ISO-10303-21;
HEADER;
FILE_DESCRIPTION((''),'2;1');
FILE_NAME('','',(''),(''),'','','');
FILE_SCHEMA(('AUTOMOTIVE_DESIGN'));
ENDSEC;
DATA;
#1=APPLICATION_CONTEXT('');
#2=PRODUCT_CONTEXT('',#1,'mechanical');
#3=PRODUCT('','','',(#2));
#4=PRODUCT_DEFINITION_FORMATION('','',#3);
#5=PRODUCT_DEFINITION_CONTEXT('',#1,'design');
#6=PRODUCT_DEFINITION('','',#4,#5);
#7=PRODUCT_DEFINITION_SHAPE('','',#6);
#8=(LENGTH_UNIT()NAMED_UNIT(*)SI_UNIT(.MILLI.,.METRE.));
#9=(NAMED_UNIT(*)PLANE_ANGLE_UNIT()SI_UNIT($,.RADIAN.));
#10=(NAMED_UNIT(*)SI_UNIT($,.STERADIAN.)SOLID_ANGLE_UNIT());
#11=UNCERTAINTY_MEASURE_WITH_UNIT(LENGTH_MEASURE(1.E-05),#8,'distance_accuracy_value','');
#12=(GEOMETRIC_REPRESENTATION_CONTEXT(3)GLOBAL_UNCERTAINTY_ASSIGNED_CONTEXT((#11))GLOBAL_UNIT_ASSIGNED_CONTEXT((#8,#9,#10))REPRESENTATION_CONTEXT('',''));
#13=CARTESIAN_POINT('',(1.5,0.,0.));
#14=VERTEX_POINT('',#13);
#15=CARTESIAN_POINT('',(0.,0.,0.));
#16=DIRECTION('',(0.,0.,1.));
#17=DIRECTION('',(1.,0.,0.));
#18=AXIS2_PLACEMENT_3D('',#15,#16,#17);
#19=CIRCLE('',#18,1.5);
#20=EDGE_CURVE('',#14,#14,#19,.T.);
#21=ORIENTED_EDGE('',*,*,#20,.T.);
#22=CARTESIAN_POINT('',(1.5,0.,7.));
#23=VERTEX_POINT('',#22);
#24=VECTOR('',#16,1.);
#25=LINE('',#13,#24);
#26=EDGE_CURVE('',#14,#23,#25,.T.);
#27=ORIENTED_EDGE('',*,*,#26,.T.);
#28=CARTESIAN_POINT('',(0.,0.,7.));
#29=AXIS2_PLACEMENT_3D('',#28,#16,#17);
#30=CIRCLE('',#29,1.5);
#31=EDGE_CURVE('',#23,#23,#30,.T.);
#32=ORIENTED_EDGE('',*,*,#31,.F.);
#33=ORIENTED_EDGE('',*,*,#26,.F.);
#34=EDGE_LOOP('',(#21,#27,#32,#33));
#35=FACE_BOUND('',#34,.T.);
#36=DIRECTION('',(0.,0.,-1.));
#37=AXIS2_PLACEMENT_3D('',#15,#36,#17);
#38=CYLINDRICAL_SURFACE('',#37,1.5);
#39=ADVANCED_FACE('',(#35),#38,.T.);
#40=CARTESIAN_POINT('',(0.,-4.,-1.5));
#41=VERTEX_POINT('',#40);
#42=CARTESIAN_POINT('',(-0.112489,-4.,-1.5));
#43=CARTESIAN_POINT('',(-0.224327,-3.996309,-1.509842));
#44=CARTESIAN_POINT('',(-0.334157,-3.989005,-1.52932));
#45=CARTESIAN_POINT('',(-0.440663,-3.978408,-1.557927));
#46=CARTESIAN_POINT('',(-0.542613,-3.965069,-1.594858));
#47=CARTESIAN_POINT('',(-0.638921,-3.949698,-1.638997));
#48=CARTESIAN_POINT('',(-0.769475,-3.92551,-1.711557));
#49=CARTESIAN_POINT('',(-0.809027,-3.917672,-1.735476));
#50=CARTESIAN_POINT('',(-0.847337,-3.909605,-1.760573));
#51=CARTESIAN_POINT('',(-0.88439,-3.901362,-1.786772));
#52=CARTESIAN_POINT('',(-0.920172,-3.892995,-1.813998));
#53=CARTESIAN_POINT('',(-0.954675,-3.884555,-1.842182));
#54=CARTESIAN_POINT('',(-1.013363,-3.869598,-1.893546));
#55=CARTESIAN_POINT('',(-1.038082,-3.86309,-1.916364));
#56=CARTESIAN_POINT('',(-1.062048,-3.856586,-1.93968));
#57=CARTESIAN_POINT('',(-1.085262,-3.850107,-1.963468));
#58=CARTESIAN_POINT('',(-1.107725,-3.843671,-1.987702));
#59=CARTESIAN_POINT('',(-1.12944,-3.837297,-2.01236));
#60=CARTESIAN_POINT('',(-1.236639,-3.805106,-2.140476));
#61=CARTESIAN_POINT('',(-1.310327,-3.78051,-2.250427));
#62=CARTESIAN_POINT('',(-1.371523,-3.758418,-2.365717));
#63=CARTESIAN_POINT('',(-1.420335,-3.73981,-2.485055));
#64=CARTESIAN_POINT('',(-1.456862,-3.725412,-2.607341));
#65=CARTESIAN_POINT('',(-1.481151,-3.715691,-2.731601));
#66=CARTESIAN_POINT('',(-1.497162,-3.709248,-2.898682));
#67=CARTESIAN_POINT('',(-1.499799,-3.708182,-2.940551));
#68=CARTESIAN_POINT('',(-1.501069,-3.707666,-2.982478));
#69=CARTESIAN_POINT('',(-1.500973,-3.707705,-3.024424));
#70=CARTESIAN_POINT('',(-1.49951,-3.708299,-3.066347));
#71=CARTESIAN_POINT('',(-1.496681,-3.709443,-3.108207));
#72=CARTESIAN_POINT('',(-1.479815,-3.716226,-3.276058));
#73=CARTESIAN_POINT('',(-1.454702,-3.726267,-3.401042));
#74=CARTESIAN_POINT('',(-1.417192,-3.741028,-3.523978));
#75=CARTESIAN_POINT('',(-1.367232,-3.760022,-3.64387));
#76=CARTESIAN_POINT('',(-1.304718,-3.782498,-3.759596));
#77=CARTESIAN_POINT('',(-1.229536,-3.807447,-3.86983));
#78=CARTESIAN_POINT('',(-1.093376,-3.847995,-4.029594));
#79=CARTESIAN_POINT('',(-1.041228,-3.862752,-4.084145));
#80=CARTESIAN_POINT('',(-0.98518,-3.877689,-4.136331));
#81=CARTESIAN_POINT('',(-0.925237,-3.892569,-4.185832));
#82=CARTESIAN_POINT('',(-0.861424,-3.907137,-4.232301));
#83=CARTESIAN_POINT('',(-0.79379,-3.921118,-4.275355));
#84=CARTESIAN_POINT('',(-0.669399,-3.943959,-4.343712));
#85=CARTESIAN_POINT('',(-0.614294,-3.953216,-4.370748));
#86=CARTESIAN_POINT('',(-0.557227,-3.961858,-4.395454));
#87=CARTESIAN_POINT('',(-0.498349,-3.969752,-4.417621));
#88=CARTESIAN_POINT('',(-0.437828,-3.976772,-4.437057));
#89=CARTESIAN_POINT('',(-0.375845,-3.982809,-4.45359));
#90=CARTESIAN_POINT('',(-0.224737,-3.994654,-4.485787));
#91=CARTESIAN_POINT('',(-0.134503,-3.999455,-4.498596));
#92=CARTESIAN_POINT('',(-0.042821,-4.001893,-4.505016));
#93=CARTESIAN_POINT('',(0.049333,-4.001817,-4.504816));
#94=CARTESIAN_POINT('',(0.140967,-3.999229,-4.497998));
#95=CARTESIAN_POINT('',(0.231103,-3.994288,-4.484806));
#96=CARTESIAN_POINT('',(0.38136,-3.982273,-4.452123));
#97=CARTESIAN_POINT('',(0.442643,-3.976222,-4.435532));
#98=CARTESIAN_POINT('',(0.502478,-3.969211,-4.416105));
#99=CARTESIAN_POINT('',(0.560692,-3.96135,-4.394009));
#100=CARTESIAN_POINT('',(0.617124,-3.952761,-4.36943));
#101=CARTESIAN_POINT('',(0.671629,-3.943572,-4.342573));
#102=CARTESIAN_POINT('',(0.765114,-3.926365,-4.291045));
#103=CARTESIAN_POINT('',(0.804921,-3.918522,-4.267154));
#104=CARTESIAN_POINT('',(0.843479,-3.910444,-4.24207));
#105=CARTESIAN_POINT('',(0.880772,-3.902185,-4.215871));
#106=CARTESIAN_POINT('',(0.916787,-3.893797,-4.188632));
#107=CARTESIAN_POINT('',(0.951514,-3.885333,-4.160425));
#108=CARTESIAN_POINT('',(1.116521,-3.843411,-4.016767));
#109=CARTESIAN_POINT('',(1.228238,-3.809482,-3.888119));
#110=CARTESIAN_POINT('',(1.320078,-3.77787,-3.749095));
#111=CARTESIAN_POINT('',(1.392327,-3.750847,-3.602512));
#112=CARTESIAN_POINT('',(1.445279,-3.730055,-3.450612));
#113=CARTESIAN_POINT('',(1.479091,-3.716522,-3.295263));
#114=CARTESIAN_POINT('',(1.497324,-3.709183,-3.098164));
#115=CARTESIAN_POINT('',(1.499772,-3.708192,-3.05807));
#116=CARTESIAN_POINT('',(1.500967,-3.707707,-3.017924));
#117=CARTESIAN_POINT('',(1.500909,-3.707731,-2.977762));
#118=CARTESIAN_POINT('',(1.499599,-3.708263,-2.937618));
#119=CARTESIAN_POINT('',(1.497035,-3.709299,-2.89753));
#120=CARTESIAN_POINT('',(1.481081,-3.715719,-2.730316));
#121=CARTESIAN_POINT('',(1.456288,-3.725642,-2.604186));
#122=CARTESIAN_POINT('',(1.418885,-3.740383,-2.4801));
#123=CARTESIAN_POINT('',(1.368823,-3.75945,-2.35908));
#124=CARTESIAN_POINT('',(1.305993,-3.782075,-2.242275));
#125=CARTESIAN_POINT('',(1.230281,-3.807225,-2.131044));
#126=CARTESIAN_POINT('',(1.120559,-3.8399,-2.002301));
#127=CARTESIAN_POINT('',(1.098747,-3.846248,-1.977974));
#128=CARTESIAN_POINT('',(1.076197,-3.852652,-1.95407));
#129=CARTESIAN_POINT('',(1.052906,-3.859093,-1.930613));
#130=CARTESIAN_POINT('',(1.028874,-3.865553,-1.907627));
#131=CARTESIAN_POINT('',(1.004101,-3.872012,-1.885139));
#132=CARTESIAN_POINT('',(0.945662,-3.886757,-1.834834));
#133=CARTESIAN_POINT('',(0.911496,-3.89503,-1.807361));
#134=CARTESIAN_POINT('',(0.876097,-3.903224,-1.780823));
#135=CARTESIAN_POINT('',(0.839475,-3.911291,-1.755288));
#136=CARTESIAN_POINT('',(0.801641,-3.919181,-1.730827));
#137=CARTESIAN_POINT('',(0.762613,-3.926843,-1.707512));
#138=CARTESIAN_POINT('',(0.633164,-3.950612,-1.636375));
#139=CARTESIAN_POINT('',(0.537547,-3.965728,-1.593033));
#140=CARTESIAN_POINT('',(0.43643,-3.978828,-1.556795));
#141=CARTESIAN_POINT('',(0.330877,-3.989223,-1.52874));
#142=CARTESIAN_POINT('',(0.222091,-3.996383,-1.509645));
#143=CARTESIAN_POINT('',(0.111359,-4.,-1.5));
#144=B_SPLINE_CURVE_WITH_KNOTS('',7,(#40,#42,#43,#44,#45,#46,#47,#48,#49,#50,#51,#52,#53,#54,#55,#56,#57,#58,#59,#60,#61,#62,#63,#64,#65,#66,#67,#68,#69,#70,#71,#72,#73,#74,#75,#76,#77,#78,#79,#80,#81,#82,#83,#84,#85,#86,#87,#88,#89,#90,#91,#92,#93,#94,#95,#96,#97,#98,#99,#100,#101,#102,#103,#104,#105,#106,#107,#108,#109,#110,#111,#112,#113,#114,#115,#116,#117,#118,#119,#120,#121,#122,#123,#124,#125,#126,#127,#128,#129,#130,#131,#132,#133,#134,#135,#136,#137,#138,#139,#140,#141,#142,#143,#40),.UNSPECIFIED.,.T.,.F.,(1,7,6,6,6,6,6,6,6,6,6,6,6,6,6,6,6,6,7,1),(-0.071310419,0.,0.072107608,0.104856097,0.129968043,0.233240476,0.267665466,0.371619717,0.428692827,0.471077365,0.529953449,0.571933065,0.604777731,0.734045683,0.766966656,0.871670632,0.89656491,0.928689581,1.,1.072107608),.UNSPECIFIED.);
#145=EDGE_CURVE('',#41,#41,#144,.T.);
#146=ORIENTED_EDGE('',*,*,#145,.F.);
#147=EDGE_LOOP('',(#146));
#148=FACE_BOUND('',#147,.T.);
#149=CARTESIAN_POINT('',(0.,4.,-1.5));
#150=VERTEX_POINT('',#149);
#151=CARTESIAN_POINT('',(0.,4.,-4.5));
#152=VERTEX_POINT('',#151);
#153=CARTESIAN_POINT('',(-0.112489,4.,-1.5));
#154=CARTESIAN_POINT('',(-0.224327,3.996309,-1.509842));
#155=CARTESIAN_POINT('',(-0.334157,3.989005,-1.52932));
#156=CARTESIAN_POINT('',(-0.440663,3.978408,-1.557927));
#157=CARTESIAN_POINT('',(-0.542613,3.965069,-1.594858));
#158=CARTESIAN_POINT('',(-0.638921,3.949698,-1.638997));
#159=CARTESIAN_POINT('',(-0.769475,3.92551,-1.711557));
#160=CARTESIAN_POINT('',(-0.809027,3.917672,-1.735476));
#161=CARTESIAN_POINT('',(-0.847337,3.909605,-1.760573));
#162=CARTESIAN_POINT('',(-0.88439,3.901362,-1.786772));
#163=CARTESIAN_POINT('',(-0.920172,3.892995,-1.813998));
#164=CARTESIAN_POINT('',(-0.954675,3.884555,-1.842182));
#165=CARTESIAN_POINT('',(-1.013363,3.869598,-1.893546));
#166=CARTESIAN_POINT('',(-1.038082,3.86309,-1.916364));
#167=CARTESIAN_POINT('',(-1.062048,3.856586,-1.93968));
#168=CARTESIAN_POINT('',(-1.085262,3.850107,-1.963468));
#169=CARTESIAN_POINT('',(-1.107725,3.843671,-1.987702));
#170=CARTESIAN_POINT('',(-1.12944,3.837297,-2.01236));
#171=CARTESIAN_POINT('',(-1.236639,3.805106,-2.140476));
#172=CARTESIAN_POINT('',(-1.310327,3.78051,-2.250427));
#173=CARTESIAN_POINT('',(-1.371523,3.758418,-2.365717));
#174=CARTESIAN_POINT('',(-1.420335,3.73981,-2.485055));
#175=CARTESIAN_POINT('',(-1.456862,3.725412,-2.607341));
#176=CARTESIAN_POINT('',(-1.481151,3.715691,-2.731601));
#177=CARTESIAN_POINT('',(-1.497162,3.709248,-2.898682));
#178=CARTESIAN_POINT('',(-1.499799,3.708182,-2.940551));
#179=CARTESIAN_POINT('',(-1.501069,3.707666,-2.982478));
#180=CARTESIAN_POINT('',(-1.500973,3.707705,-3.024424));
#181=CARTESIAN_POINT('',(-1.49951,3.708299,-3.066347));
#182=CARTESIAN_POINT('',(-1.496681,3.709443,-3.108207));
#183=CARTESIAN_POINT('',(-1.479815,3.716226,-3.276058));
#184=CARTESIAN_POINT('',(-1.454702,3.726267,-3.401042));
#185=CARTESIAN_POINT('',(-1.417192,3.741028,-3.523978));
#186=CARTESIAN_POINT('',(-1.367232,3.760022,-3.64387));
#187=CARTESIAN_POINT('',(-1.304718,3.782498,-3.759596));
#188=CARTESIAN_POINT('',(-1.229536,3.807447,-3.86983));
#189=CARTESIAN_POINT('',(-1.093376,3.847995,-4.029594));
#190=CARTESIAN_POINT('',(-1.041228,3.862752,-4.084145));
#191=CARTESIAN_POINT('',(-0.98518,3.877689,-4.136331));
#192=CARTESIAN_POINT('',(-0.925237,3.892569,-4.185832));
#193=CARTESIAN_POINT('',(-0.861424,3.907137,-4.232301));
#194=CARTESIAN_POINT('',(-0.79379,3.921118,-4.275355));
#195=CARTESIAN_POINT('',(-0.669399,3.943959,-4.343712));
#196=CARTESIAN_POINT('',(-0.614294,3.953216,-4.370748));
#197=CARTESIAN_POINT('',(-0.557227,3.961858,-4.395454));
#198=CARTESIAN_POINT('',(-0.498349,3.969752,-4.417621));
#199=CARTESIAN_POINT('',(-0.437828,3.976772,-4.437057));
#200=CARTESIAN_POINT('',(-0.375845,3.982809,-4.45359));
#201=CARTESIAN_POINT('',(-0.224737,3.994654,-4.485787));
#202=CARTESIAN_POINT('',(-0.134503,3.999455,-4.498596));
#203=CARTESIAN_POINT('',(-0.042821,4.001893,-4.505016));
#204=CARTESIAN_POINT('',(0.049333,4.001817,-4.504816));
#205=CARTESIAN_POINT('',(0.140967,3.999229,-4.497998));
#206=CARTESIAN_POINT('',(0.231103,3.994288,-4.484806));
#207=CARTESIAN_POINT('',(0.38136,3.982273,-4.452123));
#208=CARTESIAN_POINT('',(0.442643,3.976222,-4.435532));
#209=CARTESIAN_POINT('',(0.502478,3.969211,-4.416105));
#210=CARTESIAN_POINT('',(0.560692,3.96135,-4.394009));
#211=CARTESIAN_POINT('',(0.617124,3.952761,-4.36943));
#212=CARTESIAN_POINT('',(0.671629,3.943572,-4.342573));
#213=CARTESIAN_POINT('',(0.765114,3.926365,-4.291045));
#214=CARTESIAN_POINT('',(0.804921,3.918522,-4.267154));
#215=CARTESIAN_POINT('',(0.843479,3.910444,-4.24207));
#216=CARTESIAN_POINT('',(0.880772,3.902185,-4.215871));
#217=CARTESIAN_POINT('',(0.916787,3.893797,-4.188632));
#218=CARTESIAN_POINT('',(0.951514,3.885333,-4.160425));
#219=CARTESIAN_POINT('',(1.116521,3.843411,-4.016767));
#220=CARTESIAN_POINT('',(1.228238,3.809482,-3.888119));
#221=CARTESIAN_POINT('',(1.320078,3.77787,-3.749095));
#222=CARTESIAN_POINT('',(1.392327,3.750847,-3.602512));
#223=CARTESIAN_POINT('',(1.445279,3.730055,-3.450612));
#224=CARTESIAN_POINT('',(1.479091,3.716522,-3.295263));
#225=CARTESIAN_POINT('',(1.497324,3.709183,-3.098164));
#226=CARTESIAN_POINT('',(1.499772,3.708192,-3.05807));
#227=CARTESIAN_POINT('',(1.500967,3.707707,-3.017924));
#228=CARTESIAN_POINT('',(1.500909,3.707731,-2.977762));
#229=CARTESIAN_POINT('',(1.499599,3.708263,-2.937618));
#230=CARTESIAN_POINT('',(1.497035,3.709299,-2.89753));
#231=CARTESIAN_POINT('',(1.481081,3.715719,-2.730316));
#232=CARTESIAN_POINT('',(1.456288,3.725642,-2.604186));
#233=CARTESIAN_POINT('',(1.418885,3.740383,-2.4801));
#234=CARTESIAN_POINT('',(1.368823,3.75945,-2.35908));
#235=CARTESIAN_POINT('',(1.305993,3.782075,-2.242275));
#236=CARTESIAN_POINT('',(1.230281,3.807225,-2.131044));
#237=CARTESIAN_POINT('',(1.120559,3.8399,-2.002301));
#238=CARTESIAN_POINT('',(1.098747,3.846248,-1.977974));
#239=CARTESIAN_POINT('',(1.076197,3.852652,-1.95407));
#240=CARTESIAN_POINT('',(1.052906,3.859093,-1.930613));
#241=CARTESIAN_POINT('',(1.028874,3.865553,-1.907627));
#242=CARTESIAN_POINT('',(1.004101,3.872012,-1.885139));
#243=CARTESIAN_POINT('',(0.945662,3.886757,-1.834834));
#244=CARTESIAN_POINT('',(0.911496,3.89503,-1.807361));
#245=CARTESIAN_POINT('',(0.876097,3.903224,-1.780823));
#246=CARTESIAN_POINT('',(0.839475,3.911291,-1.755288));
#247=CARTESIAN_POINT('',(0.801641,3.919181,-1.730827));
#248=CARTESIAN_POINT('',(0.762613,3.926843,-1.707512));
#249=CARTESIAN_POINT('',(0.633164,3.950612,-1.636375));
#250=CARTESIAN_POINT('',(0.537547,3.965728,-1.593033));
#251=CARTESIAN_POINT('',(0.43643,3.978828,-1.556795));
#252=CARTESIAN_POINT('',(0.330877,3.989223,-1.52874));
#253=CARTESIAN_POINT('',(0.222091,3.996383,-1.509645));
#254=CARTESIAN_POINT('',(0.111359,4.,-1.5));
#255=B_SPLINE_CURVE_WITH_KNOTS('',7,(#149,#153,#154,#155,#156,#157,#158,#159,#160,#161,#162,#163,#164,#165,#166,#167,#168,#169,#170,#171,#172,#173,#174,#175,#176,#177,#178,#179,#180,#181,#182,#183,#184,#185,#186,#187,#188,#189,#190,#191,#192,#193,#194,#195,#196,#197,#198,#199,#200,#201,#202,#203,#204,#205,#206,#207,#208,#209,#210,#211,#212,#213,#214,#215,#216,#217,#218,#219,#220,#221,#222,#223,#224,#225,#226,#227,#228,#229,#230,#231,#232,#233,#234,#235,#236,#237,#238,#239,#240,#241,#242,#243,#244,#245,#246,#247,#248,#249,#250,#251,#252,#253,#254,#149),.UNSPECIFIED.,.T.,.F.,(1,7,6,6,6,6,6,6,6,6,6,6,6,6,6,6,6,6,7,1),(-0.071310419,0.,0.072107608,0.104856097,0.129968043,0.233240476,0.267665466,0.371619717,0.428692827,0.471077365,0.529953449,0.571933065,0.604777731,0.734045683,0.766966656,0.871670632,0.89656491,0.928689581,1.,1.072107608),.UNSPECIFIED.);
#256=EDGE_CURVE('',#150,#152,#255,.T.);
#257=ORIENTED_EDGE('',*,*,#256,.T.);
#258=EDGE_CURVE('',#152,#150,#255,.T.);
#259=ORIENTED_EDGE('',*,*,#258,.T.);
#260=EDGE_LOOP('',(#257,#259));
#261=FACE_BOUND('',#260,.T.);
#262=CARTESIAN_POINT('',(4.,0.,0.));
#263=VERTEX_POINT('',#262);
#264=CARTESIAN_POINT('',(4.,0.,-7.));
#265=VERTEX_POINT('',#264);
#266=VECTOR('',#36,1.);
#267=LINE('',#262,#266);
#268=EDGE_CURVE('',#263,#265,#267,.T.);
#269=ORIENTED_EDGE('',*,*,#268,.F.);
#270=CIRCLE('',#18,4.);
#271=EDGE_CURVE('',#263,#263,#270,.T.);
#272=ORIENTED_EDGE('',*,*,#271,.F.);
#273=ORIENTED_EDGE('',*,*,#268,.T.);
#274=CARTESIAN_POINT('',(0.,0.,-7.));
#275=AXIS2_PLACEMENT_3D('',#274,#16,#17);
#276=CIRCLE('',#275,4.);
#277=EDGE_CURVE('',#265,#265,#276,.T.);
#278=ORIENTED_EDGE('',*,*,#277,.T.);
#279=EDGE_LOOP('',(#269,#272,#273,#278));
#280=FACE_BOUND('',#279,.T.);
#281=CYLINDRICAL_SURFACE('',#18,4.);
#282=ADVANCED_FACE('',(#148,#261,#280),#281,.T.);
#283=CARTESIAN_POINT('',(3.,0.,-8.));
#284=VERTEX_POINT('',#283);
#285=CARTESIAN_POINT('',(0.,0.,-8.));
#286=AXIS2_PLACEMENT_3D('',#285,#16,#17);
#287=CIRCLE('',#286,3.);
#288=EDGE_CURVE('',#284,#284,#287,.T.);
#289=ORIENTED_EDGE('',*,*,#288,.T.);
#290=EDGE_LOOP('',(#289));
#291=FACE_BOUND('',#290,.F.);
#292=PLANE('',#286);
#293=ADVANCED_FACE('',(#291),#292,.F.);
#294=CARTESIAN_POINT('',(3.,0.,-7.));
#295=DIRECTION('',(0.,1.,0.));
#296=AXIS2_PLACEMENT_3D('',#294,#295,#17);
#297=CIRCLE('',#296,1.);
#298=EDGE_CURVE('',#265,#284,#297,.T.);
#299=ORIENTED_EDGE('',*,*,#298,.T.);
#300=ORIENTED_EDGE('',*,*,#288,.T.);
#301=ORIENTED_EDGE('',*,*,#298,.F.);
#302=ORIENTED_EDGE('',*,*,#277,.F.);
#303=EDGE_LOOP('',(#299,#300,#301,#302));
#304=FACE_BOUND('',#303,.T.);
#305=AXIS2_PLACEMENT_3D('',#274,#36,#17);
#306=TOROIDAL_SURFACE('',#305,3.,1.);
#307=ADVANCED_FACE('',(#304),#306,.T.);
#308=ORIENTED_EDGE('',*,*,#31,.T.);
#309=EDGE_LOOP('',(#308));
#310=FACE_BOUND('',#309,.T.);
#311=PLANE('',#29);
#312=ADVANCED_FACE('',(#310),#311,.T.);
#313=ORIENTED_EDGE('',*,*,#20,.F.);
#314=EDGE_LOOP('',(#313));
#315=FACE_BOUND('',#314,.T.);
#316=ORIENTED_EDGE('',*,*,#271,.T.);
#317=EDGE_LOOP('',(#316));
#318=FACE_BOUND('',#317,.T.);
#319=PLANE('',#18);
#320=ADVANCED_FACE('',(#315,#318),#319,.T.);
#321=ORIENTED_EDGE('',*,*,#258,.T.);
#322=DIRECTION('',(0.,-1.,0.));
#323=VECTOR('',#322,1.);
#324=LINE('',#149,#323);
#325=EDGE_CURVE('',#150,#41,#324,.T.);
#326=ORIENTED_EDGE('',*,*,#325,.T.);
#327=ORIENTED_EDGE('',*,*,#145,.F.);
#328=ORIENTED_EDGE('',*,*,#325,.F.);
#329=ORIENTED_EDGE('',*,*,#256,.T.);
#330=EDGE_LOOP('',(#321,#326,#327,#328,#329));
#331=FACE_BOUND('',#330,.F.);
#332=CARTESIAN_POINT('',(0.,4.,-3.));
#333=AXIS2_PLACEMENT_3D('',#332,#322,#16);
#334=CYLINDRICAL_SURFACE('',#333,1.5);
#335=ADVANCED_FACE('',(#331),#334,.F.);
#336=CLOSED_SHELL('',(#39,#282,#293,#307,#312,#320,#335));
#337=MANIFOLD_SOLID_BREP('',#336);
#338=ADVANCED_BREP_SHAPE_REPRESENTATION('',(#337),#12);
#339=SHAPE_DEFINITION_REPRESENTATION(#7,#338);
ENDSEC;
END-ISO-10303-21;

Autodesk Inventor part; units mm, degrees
ref_plane "YZ Plane" through (0, 0, 0) normal (1, 0, 0) x (0, 1, 0)
ref_plane "XY Plane" through (0, 0, 0) normal (0, 0, 1) x (1, 0, 0)
sketch "Sketch1" plane through (0, 0, 0) normal (0, 0, 1) x (1, 0, 0)
  circle A0 centre (0, 0) radius 4
  dimension "d0" = 8
extrude "Extrusion1" add sketch "Sketch1" against normal blind 8
sketch "Sketch2" plane through (0, 0, 0) normal (0, 0, 1) x (1, 0, 0)
  circle A0 centre (0, 0) radius 4 projected
  circle A1 centre (0, 0) radius 1.5
  dimension "d3" = 3
extrude "Extrusion2" add sketch "Sketch2" along normal blind 7 contours A1
thread "Thread1" size "M3x0.5" class "6g" standard "ANSI Metric M Profile" length 4
fillet "Fillet1" radius 1 1 edges at (-4, 0, -8)
ref_plane "Work Plane1" through (0, 4, 0) normal (0, 1, 0) x (-1, 0, 0)
sketch "Sketch3" plane through (0, 4, 0) normal (0, 1, 0) x (-1, 0, 0)
  line L0 (4, 0) -> (-4, 0) projected
  line L1 (-4, -7) -> (4, -7) projected
  arc A0 (0, 0) -> (0, 0) centre (3, -7) ccw projected
  line L2 (3, -8) -> (-3, -8) projected
  line L3 (4, 0) -> (4, -7) projected
  line L4 (-4, 0) -> (-4, -7) projected
  point P0 (0, -3)
  point P1 (0, -8)
  dimension "d10" = 5
  dimension "d11" = 4
hole "Hole1" at (0, 4, -3) direction (0, -1, 0) diameter 3 end through all
properties part number "33 - Eccentric Swivel Screw" material "Bronze, Soft Tin"
